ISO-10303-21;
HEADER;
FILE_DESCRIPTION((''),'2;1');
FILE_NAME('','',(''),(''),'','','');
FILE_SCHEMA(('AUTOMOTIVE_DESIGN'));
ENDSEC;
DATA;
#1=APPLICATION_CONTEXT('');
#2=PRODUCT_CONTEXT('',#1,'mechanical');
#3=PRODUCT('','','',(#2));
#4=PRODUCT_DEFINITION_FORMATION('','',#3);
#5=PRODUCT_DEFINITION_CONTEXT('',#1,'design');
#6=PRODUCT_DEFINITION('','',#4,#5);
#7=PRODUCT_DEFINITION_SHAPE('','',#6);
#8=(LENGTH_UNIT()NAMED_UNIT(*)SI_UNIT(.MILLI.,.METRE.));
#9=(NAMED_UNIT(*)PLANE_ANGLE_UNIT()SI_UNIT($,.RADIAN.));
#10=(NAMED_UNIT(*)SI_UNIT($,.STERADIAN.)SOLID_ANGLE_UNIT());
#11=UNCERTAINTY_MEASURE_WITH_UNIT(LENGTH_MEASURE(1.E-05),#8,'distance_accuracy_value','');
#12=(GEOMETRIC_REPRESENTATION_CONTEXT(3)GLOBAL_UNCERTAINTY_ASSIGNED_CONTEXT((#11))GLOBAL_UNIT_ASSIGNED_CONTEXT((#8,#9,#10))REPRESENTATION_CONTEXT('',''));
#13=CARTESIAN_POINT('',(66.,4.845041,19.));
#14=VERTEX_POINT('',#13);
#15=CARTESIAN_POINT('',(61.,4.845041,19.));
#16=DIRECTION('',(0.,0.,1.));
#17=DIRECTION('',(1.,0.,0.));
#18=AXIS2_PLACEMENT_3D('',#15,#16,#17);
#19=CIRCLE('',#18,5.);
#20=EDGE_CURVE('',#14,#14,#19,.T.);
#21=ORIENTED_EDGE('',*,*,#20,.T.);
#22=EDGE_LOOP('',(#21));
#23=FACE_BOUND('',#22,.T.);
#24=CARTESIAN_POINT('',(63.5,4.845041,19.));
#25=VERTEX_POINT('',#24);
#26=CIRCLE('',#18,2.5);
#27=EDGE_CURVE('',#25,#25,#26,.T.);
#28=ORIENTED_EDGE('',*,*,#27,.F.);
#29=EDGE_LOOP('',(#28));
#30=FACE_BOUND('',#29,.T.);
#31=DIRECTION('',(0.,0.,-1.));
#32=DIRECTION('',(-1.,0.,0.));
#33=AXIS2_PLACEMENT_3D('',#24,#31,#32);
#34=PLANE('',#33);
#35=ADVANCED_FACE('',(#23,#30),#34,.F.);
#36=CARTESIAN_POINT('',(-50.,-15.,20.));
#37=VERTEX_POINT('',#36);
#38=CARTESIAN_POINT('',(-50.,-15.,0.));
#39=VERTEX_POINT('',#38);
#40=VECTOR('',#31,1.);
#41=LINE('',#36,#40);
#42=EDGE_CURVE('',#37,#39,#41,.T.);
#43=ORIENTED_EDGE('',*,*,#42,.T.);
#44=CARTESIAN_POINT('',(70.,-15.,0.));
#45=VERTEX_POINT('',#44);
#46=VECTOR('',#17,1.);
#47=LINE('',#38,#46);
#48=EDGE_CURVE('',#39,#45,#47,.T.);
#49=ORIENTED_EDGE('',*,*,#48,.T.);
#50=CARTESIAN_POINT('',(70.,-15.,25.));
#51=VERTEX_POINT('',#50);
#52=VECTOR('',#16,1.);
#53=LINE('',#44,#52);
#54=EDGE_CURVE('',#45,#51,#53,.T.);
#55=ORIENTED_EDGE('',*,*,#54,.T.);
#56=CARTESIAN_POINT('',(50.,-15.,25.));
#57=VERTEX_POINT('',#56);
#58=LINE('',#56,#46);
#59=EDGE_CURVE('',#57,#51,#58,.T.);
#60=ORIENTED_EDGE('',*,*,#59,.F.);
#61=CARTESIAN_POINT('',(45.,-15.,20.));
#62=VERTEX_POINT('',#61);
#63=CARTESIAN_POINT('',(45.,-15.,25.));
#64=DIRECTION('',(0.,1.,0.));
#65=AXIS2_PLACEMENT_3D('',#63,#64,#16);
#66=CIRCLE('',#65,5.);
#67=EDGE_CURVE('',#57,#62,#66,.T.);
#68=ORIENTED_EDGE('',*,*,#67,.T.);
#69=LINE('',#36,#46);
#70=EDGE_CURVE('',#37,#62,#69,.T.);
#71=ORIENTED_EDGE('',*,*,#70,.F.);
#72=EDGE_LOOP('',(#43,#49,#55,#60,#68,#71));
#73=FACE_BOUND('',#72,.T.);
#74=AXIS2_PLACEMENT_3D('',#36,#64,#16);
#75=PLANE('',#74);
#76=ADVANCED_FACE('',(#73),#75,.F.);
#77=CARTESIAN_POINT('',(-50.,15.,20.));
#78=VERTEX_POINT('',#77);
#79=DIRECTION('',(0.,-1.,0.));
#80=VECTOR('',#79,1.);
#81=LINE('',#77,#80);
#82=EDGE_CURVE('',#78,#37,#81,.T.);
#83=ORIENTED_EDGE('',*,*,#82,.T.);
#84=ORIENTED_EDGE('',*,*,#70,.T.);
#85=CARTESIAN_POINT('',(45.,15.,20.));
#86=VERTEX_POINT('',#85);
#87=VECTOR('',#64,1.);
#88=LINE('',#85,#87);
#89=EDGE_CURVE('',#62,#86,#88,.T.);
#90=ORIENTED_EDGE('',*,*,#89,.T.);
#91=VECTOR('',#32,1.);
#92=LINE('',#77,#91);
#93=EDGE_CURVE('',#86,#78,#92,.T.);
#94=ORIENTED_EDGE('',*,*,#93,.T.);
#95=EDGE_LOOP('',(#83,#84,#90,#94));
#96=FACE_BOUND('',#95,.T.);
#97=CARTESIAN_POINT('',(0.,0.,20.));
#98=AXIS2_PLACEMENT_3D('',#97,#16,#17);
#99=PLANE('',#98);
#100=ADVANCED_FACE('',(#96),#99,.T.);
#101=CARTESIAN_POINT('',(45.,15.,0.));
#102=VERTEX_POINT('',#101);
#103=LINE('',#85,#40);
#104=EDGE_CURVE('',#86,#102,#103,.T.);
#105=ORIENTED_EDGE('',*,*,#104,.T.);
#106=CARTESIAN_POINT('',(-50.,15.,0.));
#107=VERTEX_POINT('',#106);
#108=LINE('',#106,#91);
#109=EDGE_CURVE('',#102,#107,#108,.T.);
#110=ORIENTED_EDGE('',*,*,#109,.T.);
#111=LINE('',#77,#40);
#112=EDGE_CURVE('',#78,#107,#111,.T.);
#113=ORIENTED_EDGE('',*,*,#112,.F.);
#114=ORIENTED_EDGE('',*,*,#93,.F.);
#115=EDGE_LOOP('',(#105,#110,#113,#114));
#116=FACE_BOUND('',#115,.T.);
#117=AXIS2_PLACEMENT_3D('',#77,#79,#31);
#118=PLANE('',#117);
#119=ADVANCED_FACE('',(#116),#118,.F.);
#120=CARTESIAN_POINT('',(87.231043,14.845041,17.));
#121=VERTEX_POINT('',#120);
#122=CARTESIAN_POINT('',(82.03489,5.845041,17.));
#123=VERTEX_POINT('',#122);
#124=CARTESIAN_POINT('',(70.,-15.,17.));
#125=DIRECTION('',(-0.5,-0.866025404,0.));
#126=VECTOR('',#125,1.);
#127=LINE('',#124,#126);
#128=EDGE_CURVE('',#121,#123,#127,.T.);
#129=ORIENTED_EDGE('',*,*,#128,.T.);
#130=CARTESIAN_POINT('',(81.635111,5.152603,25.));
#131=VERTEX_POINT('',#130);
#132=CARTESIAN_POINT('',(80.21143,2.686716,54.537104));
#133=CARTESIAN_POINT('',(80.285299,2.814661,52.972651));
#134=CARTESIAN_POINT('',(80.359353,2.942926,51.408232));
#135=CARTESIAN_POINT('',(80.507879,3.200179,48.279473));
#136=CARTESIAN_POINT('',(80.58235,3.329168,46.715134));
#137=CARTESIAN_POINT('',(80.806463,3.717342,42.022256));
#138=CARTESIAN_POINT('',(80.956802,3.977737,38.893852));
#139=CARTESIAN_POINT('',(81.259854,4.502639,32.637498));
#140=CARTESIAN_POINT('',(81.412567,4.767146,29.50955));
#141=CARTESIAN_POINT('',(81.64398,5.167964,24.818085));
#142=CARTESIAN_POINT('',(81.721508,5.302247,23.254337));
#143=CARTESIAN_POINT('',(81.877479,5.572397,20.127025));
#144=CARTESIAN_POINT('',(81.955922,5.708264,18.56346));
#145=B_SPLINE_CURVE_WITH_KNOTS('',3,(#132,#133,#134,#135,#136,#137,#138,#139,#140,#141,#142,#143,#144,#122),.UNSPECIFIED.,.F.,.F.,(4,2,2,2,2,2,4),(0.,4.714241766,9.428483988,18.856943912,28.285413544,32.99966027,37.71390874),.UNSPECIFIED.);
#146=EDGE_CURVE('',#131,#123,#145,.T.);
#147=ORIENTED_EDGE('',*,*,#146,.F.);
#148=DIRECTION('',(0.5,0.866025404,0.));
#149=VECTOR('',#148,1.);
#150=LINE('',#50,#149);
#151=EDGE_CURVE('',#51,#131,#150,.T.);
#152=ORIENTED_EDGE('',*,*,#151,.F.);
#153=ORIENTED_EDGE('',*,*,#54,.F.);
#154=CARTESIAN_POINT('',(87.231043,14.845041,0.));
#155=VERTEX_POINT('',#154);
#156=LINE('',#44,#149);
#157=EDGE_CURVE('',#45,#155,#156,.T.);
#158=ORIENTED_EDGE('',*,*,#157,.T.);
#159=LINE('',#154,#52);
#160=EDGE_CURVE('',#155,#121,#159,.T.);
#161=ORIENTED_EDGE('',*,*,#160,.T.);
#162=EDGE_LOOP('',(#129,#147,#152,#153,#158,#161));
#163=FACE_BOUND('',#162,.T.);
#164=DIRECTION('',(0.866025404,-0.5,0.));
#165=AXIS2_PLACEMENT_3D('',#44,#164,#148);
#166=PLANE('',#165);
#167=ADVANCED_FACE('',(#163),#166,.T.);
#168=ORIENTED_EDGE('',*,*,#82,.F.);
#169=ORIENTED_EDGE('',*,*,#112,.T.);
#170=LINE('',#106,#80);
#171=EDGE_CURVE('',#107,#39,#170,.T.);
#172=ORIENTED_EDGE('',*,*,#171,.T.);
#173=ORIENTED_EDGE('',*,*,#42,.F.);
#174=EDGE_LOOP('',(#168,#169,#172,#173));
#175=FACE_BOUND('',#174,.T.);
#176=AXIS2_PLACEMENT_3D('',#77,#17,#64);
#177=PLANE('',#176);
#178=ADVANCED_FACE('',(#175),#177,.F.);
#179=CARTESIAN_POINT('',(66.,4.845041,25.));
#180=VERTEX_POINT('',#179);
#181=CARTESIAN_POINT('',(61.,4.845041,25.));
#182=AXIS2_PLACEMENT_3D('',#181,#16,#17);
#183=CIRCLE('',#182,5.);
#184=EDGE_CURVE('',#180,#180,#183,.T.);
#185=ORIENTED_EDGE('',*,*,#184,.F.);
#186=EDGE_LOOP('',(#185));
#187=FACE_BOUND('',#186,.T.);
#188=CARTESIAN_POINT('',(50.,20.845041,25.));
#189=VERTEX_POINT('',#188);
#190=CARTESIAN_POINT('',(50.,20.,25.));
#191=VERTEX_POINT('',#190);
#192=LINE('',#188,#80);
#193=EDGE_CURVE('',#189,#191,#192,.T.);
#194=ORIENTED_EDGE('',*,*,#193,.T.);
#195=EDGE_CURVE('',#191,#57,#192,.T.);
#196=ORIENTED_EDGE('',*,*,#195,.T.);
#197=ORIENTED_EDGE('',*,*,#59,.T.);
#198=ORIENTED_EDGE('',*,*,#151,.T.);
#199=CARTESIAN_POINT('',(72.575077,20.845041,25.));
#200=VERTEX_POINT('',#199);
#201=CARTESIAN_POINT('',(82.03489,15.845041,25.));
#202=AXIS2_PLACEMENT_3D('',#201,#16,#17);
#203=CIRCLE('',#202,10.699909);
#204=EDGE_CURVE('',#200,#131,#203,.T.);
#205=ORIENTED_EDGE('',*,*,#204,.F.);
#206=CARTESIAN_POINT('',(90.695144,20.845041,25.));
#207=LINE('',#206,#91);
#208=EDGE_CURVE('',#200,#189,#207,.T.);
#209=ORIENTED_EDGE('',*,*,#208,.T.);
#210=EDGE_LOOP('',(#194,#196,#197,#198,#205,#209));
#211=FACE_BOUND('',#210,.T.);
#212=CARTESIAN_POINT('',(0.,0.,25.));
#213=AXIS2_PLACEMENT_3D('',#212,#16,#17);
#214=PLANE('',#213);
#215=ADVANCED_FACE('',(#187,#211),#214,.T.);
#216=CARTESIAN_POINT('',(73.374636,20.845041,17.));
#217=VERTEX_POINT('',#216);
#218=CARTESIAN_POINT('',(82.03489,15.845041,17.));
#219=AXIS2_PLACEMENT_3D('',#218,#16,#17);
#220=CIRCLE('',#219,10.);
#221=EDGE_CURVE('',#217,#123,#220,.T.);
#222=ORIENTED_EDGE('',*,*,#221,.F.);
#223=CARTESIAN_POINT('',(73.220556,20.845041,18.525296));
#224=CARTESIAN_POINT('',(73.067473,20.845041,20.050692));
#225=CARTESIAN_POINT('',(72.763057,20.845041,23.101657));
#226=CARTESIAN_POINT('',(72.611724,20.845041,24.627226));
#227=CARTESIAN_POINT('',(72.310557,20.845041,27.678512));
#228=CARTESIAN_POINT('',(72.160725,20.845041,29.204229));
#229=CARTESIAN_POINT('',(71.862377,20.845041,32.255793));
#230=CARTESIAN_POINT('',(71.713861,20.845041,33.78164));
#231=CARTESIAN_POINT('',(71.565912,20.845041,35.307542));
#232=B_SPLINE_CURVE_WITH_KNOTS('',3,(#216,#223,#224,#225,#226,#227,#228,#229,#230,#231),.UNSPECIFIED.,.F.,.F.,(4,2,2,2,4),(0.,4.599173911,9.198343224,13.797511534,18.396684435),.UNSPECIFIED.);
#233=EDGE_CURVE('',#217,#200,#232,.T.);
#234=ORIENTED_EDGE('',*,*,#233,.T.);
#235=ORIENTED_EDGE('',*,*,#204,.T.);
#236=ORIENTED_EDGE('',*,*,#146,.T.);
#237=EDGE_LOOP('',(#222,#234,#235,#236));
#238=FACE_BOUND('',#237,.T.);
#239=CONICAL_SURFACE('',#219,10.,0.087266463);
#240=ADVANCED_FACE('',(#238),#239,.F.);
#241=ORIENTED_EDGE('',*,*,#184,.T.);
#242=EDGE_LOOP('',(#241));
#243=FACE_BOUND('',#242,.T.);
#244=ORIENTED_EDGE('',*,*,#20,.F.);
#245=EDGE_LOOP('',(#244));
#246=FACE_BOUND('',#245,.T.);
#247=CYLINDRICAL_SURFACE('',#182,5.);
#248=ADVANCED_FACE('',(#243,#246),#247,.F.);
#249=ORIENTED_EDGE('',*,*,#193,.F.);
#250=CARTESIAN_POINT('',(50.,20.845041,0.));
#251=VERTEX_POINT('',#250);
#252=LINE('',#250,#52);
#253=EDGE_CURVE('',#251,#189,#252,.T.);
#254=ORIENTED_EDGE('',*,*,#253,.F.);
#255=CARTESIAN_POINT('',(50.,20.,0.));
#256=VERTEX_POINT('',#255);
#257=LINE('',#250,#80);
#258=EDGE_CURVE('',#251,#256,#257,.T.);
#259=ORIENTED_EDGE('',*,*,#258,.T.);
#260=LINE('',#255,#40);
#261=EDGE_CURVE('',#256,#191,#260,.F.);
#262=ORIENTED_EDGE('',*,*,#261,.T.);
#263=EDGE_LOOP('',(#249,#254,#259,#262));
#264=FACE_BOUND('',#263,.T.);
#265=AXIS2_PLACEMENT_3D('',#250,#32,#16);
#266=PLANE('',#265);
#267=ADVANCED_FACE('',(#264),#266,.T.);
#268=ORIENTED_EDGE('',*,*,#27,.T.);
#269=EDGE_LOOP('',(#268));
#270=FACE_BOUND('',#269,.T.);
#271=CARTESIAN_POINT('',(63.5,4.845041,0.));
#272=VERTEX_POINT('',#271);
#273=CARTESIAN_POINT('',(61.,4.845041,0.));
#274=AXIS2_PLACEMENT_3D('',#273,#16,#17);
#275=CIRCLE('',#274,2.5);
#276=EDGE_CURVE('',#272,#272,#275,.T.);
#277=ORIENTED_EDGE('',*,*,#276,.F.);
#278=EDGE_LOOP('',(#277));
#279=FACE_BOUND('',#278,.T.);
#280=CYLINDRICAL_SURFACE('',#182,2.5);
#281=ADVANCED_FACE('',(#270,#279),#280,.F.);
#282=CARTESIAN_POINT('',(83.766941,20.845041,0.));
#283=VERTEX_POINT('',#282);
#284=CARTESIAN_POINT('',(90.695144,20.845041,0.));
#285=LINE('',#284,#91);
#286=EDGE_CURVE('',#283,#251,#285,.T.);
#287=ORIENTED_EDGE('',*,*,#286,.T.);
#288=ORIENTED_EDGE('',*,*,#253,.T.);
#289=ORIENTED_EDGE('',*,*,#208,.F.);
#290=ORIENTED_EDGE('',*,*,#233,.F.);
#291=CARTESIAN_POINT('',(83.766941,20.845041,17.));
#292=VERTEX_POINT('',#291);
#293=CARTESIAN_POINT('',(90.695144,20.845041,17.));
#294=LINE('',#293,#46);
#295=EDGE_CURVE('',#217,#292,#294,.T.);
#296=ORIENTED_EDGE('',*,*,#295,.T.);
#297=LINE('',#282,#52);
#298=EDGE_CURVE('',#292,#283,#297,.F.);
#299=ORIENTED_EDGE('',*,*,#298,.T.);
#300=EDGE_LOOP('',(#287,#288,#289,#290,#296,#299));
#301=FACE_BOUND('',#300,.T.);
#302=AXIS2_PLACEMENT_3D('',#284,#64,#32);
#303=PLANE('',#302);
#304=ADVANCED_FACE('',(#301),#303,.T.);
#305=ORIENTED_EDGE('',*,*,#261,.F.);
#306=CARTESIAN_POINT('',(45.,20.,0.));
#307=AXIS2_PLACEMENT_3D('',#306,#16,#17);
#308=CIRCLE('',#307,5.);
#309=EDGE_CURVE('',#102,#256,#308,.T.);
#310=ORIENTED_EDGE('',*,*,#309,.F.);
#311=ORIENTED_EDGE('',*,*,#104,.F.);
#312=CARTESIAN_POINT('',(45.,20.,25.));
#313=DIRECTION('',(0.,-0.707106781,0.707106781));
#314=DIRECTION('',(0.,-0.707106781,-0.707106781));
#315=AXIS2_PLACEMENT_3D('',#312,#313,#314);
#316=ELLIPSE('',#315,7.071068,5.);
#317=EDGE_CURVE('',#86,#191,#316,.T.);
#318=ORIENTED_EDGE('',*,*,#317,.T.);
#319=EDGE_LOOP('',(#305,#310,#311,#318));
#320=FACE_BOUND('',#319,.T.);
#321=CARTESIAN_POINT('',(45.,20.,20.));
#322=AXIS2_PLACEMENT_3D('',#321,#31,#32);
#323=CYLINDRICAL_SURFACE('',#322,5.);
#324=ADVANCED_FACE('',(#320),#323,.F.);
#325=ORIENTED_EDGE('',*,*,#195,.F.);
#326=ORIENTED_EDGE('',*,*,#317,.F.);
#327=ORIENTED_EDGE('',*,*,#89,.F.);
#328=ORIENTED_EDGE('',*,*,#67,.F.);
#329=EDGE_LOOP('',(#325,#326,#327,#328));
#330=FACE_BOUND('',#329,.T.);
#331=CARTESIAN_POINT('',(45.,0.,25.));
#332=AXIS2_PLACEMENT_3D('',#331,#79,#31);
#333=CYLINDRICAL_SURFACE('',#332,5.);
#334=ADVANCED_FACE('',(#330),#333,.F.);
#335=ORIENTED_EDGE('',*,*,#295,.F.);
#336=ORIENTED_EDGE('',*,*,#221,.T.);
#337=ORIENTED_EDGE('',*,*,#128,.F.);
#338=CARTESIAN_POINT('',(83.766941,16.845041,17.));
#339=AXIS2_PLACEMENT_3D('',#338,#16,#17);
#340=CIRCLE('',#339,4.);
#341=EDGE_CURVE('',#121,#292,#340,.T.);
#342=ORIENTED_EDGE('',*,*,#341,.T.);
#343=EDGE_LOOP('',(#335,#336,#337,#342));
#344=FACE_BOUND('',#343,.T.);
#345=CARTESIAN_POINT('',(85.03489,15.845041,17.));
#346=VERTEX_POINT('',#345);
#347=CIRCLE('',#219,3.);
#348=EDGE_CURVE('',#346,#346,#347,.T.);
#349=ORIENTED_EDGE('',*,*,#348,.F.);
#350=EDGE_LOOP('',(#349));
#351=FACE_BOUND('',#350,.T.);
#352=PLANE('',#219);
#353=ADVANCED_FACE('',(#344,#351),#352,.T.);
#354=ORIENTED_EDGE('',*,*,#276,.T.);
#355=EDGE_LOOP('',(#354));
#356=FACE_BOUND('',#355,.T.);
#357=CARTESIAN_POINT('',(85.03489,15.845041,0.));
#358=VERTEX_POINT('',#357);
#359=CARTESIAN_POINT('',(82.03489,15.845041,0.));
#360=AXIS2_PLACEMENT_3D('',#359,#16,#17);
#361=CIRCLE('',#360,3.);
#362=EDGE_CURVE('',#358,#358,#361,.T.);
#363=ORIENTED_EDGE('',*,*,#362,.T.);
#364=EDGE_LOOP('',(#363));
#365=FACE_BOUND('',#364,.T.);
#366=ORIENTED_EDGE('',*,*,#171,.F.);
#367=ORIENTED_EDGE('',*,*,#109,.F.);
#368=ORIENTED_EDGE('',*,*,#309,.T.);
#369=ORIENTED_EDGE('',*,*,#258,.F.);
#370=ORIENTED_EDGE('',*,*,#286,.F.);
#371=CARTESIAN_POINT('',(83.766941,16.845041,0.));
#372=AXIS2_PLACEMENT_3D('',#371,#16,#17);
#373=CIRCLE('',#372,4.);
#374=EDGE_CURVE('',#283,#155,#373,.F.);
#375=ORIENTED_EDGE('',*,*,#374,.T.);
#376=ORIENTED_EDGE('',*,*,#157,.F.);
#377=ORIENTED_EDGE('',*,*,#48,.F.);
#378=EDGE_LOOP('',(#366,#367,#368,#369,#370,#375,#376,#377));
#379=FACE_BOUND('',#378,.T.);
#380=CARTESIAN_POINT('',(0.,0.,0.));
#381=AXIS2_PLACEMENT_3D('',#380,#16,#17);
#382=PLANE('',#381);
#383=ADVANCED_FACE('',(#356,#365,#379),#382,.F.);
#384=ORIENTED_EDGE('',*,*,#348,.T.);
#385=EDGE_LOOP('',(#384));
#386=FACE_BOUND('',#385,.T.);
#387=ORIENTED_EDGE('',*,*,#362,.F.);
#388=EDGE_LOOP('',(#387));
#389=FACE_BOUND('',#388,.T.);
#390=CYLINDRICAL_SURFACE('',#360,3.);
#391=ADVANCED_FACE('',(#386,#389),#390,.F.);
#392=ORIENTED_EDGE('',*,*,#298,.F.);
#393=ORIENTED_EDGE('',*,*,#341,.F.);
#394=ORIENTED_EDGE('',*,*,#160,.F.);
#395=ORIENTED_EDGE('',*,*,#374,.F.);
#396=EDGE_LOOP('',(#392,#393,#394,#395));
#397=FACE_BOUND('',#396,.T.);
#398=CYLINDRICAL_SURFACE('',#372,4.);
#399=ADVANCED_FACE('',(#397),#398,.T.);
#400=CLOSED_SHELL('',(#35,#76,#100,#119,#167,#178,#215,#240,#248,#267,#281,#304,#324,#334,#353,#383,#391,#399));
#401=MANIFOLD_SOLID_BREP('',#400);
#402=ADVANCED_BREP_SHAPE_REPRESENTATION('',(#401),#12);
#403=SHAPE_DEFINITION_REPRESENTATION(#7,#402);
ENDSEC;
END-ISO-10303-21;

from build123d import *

# Parameters (mm, degrees)
SKETCH_1_W                = 100
SKETCH_1_H                = 30
EXTRUDE_1_DEPTH           = 20
EXTRUDE_2_DEPTH           = 5
EXTRUDE_2_DEPTH_BACK      = 20
FILLET_1_R                = 5
SKETCH_3_R                = 10
CUT_EXTRUDE_1_DEPTH       = 8
SKETCH_4_R                = 3
CUT_EXTRUDE_2_DEPTH       = 95.599814737
HOLE_WIZARD_1_D           = 5
HOLE_WIZARD_1_CBORE_D     = 10
HOLE_WIZARD_1_CBORE_DEPTH = 6
DRAFT_1_ANGLE             = 5
FILLET_2_R                = 4


with BuildPart() as part:
    # 草图1 → 凸台-拉伸1 (new body)
    with BuildSketch(Plane.XY):
        Rectangle(SKETCH_1_W, SKETCH_1_H)
    extrude(amount=EXTRUDE_1_DEPTH)

    # 草图2 → 凸台-拉伸2 (add, two sides: drawn at the far end of the back side and taken through both)
    with BuildSketch(Plane.XY.offset(20).offset(-EXTRUDE_2_DEPTH_BACK)):
        Polygon((50, -15), (70, -15), (90.695144291, 20.845041382), (50, 20.845041382), align=None)
    extrude(amount=EXTRUDE_2_DEPTH + EXTRUDE_2_DEPTH_BACK)

    # 圆角1
    fillet_1_edges = [part.edges().sort_by_distance(p)[0] for p in [
        (50, 15, 10),
        (50, 0, 20),
    ]]
    fillet(fillet_1_edges, radius=FILLET_1_R - 0.0001)  # a hair under: the kernel refuses the full size

    # 草图3 → 切除-拉伸1 (cut)
    with BuildSketch(Plane.XY.offset(25)):
        with Locations((82.034890253, 15.845041382)):
            Circle(SKETCH_3_R)
    extrude(amount=-CUT_EXTRUDE_1_DEPTH, mode=Mode.SUBTRACT)

    # 草图4 → 切除-拉伸2 (cut, through all)
    with BuildSketch(Plane.XY.offset(17)):
        with Locations((82.034890253, 15.845041382)):
            Circle(SKETCH_4_R)
    extrude(amount=-CUT_EXTRUDE_2_DEPTH, mode=Mode.SUBTRACT)

    # 孔1 (through all)
    with Locations(Plane(origin=(61, 4.845041382, 25), x_dir=(1, 0, 0), z_dir=(0, 0, 1))):
        with Locations((0, 0)):
            CounterBoreHole(HOLE_WIZARD_1_D / 2, HOLE_WIZARD_1_CBORE_D / 2, HOLE_WIZARD_1_CBORE_DEPTH)

    # 拔模1
    draft_1_faces = [part.faces().sort_by_distance(p)[0] for p in [
        (73.374636215, 10.845041382, 21),
    ]]
    draft(draft_1_faces, Plane(origin=(82.034890253, 15.845041382, 17), x_dir=(1, 0, 0), z_dir=(0, 0, 1)), DRAFT_1_ANGLE)

    # 圆角2
    fillet_2_edges = [part.edges().sort_by_distance(p)[0] for p in [
        (90.695144291, 20.845041382, 8.5),
    ]]
    fillet(fillet_2_edges, radius=FILLET_2_R)


solid = part.part
